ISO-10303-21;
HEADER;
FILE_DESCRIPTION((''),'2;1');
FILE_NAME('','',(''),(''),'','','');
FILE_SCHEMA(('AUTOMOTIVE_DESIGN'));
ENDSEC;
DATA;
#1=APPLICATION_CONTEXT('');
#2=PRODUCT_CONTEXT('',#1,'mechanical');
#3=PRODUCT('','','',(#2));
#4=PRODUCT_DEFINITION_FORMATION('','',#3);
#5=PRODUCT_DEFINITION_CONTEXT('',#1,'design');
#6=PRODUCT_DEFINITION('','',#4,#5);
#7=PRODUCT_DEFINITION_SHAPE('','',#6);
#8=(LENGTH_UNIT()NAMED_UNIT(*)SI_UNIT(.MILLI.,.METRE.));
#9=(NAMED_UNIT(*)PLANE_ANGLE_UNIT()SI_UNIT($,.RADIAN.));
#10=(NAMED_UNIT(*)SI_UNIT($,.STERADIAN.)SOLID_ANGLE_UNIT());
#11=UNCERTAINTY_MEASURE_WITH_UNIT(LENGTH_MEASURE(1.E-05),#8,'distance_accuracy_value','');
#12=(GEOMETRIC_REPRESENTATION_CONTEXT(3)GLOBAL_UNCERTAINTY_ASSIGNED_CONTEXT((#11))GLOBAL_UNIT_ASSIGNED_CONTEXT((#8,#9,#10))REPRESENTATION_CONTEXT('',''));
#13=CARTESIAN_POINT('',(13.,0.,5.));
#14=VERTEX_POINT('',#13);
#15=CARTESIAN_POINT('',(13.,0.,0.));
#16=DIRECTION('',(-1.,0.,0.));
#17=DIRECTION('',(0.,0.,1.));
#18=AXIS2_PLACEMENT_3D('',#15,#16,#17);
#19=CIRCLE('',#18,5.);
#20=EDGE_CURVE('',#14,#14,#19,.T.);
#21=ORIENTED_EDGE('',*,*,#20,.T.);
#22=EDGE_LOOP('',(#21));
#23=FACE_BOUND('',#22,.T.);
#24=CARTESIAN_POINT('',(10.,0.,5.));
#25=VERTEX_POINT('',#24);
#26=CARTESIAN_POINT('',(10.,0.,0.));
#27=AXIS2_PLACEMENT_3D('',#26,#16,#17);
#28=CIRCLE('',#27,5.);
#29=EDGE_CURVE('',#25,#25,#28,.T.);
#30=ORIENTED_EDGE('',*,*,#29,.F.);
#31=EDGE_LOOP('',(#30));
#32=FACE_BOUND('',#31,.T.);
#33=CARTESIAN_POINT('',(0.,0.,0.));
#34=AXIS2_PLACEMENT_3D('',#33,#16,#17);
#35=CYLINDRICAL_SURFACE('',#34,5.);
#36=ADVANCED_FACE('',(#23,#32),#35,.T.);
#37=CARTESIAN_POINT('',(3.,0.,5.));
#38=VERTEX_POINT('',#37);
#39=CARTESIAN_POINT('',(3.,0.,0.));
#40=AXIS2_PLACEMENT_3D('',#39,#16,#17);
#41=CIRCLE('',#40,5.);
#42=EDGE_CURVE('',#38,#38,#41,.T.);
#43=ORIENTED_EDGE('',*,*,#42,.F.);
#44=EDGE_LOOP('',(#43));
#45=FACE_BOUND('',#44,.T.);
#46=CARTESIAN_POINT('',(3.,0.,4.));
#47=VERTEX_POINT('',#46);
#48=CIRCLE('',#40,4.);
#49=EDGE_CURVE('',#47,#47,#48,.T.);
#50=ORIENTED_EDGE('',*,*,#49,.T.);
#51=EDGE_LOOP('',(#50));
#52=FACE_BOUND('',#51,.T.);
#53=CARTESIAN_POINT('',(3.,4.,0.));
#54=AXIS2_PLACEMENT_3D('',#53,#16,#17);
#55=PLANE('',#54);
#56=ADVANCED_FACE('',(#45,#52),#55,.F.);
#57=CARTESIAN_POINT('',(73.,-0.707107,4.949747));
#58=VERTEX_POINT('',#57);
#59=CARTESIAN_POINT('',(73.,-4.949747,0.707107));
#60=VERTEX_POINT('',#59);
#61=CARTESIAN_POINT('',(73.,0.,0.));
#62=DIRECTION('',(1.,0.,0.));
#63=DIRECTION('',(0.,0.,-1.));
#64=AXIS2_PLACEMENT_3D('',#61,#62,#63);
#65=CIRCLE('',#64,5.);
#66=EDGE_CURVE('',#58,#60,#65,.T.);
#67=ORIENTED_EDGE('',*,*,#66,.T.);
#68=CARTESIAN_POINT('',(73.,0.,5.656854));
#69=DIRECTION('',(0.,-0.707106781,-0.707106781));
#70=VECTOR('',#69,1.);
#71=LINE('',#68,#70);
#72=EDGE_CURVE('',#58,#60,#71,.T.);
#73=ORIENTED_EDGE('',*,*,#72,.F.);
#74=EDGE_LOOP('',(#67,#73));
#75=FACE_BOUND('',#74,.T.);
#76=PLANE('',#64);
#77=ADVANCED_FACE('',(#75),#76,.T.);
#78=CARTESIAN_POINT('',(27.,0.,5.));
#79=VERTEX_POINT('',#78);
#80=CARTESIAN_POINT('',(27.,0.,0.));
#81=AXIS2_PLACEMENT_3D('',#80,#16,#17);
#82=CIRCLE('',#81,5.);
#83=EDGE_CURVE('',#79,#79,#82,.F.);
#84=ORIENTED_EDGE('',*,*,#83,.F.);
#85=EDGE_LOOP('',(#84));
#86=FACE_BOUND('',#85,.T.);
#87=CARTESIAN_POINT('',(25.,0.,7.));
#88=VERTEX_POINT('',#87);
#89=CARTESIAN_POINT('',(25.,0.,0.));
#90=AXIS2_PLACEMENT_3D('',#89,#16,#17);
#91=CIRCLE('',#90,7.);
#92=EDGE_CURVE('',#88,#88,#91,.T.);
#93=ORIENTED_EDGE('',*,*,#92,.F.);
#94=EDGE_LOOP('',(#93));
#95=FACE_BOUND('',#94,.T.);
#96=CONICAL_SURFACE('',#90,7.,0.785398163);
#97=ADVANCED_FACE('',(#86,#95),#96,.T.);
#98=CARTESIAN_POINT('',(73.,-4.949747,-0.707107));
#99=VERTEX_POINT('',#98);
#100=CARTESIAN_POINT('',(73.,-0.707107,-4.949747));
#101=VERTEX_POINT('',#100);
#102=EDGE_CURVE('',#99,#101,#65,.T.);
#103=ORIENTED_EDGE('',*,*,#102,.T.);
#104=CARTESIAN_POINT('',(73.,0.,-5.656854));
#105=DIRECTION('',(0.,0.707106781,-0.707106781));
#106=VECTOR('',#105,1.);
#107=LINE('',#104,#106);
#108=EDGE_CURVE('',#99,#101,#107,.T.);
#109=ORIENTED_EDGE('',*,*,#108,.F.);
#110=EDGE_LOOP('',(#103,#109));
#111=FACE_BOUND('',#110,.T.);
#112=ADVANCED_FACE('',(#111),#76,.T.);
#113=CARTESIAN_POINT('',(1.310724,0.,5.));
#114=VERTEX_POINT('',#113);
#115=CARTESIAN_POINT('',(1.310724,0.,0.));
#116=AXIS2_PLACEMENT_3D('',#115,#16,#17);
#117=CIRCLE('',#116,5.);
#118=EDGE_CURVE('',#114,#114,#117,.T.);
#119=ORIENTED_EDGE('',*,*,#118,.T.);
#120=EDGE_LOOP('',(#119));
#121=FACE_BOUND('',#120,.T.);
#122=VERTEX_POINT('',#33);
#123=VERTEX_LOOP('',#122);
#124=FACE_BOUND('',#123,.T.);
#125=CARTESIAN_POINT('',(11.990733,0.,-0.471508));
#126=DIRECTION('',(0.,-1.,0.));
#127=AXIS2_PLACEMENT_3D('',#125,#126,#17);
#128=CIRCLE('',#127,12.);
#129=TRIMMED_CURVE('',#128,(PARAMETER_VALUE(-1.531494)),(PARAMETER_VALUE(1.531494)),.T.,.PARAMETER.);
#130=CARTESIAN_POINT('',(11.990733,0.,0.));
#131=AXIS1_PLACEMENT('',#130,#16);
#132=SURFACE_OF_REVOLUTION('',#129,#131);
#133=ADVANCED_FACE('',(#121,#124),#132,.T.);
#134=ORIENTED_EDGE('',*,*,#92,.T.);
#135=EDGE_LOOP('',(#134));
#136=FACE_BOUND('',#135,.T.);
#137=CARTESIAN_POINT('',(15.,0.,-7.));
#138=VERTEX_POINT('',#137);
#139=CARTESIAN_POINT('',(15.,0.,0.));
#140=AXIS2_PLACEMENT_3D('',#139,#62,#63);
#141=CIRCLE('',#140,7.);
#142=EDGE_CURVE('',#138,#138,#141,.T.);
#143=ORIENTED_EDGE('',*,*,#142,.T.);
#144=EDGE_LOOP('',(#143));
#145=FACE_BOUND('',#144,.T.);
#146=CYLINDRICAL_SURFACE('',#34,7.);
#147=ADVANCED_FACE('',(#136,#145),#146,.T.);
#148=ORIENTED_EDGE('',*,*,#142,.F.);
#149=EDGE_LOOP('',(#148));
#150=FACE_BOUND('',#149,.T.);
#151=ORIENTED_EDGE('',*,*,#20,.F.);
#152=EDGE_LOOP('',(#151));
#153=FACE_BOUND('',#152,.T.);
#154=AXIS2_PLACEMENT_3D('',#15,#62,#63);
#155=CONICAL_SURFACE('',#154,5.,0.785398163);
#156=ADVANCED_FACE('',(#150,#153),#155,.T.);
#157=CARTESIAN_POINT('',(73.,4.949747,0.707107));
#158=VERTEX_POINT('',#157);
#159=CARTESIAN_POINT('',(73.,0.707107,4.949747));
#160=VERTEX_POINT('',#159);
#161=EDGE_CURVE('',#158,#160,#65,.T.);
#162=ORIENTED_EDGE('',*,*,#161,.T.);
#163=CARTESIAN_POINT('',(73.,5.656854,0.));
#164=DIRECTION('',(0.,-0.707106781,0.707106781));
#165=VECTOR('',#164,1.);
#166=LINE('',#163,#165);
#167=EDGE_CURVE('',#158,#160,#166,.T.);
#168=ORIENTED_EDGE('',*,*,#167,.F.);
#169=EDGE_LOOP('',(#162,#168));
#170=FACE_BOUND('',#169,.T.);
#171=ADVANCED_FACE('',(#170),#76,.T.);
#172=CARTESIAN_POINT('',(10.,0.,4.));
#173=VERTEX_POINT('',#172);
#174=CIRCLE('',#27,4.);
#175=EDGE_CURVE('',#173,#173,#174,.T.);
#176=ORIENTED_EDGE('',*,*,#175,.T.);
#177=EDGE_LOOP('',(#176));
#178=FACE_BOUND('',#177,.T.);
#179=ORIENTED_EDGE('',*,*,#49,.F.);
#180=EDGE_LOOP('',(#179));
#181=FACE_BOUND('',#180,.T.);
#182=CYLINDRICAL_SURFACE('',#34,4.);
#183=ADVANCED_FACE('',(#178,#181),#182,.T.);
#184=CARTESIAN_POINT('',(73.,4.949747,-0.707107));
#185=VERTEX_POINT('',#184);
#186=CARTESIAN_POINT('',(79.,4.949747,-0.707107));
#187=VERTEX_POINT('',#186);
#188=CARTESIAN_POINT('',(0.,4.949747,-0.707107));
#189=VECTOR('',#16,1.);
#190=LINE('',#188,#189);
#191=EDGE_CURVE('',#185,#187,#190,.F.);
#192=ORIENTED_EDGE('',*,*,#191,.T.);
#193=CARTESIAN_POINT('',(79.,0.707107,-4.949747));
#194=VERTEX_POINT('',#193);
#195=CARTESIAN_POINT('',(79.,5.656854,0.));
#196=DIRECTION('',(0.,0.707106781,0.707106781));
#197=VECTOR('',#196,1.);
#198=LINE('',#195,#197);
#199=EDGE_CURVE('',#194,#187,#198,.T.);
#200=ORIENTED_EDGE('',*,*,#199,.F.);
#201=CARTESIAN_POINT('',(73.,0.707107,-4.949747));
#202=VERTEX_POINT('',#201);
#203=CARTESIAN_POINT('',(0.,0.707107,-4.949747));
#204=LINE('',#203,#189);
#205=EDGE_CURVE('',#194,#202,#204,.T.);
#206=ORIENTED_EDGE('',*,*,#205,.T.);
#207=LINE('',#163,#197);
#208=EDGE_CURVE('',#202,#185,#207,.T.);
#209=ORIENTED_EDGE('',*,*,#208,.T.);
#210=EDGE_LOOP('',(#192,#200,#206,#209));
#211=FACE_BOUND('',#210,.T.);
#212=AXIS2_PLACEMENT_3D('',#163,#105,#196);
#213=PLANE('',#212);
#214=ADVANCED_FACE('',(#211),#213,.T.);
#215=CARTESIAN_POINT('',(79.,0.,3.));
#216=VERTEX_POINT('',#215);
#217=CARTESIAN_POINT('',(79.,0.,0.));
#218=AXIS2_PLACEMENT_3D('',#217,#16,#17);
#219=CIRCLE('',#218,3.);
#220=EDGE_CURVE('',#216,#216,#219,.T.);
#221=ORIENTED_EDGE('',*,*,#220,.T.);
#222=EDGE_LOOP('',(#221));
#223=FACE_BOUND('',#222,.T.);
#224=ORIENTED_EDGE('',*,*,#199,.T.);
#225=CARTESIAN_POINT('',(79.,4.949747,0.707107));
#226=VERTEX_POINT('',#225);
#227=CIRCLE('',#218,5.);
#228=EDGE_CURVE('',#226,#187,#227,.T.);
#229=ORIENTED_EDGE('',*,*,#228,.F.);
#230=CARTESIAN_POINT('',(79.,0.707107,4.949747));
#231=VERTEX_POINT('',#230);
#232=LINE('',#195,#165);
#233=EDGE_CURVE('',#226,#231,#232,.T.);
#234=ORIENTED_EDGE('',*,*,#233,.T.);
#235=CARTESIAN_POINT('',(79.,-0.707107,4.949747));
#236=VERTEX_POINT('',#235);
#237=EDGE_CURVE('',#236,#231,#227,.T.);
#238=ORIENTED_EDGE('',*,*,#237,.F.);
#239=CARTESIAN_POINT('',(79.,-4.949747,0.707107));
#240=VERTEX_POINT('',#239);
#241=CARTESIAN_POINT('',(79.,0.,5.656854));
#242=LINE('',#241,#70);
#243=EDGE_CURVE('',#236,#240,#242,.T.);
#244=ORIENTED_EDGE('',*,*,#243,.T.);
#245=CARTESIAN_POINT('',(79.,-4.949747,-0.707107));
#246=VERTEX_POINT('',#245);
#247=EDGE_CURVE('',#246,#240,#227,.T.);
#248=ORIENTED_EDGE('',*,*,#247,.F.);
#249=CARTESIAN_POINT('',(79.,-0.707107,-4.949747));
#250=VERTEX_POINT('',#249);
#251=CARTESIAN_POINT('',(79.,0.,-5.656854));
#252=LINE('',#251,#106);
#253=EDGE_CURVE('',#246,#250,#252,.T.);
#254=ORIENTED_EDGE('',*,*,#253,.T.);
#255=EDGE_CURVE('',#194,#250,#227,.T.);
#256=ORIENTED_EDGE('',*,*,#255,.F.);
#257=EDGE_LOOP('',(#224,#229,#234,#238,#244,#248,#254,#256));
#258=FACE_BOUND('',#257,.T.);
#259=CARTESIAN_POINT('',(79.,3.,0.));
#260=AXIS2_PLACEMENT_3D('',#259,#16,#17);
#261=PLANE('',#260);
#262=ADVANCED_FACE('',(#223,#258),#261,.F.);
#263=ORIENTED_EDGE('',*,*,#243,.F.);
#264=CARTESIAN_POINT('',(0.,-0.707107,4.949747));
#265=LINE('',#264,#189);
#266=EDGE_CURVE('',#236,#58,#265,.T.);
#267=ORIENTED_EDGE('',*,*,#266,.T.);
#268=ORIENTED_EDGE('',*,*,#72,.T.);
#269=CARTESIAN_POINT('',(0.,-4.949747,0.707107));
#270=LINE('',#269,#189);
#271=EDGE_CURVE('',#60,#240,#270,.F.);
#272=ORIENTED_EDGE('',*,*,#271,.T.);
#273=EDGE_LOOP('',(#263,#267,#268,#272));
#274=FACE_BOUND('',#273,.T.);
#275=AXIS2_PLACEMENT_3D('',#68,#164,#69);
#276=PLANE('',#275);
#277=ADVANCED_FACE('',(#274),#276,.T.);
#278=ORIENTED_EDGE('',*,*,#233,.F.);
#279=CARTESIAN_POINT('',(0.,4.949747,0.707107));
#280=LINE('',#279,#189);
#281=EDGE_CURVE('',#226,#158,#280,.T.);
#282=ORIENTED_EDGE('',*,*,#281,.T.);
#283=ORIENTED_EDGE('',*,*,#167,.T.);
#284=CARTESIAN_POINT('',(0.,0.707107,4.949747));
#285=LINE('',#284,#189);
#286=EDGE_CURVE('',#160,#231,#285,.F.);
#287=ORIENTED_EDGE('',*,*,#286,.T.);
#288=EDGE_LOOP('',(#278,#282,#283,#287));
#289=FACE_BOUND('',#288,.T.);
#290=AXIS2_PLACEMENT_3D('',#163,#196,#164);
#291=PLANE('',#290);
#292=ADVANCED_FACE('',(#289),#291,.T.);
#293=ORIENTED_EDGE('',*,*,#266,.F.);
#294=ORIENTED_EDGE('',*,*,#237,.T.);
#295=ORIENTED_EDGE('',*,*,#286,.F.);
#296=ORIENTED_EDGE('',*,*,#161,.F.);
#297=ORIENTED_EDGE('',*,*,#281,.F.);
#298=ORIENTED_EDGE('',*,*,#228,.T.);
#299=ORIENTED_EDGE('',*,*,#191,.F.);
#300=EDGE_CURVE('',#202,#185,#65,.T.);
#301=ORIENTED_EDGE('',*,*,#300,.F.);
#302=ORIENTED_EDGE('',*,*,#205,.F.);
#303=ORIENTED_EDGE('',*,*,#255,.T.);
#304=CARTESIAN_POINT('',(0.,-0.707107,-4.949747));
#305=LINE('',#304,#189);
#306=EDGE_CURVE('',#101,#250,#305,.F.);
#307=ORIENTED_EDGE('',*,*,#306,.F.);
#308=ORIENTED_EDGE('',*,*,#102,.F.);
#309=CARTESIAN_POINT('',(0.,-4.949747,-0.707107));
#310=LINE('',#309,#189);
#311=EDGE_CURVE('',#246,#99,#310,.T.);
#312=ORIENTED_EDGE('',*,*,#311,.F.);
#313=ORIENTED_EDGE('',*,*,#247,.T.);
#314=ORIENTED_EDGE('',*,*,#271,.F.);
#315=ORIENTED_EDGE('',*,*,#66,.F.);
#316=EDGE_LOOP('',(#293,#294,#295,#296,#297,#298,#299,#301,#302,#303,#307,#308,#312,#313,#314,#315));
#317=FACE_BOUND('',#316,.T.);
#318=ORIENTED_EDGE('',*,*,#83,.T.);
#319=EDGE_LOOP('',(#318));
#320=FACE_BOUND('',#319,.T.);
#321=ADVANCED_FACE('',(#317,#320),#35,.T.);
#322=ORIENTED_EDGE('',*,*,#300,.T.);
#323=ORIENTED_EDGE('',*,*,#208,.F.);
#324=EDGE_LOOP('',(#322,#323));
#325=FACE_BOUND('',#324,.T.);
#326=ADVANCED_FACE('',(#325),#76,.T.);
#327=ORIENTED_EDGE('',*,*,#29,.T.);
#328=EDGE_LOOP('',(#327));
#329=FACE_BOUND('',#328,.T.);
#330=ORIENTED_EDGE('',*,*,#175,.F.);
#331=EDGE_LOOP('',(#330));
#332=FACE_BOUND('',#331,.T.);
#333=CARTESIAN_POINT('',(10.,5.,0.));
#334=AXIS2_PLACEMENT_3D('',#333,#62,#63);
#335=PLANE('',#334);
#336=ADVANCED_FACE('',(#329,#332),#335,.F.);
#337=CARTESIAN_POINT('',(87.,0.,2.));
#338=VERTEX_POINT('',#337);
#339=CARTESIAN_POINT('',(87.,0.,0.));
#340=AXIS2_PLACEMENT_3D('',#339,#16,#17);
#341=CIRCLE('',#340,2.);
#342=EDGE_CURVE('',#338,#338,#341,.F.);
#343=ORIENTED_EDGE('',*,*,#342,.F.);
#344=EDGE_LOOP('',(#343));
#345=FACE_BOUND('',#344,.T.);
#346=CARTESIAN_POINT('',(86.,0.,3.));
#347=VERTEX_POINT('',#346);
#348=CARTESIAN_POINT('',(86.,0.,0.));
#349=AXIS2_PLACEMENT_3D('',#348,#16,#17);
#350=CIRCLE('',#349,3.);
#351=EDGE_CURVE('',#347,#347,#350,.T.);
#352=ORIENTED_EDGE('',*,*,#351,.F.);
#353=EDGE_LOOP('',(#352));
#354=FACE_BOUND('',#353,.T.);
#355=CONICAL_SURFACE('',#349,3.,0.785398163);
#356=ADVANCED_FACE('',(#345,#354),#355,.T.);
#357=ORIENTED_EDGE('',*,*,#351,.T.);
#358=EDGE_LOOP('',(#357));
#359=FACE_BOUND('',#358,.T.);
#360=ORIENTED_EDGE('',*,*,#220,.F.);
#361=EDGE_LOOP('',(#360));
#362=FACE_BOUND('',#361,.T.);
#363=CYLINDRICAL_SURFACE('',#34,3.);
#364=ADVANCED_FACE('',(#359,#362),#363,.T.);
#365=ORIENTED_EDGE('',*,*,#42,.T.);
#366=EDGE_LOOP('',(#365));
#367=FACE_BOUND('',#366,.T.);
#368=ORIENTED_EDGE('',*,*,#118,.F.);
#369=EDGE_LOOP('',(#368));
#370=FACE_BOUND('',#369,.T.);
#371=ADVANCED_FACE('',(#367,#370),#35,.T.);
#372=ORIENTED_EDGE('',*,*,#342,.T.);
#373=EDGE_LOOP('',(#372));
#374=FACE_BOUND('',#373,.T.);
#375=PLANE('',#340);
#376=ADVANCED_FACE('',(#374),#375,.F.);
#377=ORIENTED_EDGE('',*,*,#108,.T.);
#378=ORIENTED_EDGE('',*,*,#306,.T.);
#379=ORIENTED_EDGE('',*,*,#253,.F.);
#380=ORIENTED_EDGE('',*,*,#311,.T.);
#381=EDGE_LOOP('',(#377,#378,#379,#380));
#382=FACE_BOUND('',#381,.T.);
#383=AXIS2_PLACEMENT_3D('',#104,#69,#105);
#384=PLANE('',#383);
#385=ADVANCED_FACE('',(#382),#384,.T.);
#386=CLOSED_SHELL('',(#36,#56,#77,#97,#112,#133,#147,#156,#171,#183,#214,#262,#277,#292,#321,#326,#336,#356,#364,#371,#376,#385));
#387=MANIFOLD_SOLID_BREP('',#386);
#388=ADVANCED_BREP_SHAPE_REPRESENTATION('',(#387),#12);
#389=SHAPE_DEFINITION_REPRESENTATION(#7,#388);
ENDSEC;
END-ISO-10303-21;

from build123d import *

# Parameters (mm, degrees)
CHAMFER1_SIZE      = 1
CHAMFER2_SIZE      = 2
SKETCH2_OUTSIDE_W  = 33.844
SKETCH2_OUTSIDE_H  = 33.844
CUT_EXTRUDE1_DEPTH = 6


with BuildPart() as part:
    # Sketch1 → Revolve1 (revolve)
    with BuildSketch(Plane.XY, mode=Mode.PRIVATE) as revolve1_sk:
        with BuildLine():
            Line((87, 0), (87, 3))
            Line((87, 3), (79, 3))
            Line((79, 3), (79, 5))
            Line((79, 5), (25, 5))
            Line((25, 5), (25, 7))
            Line((25, 7), (13, 7))
            Line((13, 7), (13, 5))
            Line((13, 5), (10, 5))
            Line((10, 5), (10, 4))
            Line((10, 4), (3, 4))
            Line((3, 4), (3, 5))
            Line((3, 5), (1.310723572, 5))
            ThreePointArc((1.310723572, 5), (0.382949383, 2.571411472), (0, 0))
            Line((0, 0), (87, 0))
        make_face()
    revolve(revolve1_sk.sketch.rotate(Axis((0, 0, 0), (1, 0, 0)), 90), axis=Axis((0, 0, 0), (1, 0, 0)))

    # Chamfer1
    chamfer1_edges = [part.edges().sort_by_distance(p)[0] for p in [
        (87, 0, -3),
    ]]
    chamfer(chamfer1_edges, length=CHAMFER1_SIZE)

    # Chamfer2
    chamfer2_edges = [part.edges().sort_by_distance(p)[0] for p in [
        (13, 0, -7),
        (25, 0, -5),
    ]]
    chamfer(chamfer2_edges, length=CHAMFER2_SIZE - 0.0001)  # a hair under: the kernel refuses the full size

    # Sketch2 outside → Cut-Extrude1 (cut)
    with BuildSketch(Plane(origin=(79, 0, 0), x_dir=(0, 0, -1), z_dir=(1, 0, 0))):
        Rectangle(SKETCH2_OUTSIDE_W, SKETCH2_OUTSIDE_H)
        Polygon((0, 5.656854249), (5.656854249, 0), (0, -5.656854249), (-5.656854249, 0), align=None, mode=Mode.SUBTRACT)
    extrude(amount=-CUT_EXTRUDE1_DEPTH, mode=Mode.SUBTRACT)


solid = part.part
